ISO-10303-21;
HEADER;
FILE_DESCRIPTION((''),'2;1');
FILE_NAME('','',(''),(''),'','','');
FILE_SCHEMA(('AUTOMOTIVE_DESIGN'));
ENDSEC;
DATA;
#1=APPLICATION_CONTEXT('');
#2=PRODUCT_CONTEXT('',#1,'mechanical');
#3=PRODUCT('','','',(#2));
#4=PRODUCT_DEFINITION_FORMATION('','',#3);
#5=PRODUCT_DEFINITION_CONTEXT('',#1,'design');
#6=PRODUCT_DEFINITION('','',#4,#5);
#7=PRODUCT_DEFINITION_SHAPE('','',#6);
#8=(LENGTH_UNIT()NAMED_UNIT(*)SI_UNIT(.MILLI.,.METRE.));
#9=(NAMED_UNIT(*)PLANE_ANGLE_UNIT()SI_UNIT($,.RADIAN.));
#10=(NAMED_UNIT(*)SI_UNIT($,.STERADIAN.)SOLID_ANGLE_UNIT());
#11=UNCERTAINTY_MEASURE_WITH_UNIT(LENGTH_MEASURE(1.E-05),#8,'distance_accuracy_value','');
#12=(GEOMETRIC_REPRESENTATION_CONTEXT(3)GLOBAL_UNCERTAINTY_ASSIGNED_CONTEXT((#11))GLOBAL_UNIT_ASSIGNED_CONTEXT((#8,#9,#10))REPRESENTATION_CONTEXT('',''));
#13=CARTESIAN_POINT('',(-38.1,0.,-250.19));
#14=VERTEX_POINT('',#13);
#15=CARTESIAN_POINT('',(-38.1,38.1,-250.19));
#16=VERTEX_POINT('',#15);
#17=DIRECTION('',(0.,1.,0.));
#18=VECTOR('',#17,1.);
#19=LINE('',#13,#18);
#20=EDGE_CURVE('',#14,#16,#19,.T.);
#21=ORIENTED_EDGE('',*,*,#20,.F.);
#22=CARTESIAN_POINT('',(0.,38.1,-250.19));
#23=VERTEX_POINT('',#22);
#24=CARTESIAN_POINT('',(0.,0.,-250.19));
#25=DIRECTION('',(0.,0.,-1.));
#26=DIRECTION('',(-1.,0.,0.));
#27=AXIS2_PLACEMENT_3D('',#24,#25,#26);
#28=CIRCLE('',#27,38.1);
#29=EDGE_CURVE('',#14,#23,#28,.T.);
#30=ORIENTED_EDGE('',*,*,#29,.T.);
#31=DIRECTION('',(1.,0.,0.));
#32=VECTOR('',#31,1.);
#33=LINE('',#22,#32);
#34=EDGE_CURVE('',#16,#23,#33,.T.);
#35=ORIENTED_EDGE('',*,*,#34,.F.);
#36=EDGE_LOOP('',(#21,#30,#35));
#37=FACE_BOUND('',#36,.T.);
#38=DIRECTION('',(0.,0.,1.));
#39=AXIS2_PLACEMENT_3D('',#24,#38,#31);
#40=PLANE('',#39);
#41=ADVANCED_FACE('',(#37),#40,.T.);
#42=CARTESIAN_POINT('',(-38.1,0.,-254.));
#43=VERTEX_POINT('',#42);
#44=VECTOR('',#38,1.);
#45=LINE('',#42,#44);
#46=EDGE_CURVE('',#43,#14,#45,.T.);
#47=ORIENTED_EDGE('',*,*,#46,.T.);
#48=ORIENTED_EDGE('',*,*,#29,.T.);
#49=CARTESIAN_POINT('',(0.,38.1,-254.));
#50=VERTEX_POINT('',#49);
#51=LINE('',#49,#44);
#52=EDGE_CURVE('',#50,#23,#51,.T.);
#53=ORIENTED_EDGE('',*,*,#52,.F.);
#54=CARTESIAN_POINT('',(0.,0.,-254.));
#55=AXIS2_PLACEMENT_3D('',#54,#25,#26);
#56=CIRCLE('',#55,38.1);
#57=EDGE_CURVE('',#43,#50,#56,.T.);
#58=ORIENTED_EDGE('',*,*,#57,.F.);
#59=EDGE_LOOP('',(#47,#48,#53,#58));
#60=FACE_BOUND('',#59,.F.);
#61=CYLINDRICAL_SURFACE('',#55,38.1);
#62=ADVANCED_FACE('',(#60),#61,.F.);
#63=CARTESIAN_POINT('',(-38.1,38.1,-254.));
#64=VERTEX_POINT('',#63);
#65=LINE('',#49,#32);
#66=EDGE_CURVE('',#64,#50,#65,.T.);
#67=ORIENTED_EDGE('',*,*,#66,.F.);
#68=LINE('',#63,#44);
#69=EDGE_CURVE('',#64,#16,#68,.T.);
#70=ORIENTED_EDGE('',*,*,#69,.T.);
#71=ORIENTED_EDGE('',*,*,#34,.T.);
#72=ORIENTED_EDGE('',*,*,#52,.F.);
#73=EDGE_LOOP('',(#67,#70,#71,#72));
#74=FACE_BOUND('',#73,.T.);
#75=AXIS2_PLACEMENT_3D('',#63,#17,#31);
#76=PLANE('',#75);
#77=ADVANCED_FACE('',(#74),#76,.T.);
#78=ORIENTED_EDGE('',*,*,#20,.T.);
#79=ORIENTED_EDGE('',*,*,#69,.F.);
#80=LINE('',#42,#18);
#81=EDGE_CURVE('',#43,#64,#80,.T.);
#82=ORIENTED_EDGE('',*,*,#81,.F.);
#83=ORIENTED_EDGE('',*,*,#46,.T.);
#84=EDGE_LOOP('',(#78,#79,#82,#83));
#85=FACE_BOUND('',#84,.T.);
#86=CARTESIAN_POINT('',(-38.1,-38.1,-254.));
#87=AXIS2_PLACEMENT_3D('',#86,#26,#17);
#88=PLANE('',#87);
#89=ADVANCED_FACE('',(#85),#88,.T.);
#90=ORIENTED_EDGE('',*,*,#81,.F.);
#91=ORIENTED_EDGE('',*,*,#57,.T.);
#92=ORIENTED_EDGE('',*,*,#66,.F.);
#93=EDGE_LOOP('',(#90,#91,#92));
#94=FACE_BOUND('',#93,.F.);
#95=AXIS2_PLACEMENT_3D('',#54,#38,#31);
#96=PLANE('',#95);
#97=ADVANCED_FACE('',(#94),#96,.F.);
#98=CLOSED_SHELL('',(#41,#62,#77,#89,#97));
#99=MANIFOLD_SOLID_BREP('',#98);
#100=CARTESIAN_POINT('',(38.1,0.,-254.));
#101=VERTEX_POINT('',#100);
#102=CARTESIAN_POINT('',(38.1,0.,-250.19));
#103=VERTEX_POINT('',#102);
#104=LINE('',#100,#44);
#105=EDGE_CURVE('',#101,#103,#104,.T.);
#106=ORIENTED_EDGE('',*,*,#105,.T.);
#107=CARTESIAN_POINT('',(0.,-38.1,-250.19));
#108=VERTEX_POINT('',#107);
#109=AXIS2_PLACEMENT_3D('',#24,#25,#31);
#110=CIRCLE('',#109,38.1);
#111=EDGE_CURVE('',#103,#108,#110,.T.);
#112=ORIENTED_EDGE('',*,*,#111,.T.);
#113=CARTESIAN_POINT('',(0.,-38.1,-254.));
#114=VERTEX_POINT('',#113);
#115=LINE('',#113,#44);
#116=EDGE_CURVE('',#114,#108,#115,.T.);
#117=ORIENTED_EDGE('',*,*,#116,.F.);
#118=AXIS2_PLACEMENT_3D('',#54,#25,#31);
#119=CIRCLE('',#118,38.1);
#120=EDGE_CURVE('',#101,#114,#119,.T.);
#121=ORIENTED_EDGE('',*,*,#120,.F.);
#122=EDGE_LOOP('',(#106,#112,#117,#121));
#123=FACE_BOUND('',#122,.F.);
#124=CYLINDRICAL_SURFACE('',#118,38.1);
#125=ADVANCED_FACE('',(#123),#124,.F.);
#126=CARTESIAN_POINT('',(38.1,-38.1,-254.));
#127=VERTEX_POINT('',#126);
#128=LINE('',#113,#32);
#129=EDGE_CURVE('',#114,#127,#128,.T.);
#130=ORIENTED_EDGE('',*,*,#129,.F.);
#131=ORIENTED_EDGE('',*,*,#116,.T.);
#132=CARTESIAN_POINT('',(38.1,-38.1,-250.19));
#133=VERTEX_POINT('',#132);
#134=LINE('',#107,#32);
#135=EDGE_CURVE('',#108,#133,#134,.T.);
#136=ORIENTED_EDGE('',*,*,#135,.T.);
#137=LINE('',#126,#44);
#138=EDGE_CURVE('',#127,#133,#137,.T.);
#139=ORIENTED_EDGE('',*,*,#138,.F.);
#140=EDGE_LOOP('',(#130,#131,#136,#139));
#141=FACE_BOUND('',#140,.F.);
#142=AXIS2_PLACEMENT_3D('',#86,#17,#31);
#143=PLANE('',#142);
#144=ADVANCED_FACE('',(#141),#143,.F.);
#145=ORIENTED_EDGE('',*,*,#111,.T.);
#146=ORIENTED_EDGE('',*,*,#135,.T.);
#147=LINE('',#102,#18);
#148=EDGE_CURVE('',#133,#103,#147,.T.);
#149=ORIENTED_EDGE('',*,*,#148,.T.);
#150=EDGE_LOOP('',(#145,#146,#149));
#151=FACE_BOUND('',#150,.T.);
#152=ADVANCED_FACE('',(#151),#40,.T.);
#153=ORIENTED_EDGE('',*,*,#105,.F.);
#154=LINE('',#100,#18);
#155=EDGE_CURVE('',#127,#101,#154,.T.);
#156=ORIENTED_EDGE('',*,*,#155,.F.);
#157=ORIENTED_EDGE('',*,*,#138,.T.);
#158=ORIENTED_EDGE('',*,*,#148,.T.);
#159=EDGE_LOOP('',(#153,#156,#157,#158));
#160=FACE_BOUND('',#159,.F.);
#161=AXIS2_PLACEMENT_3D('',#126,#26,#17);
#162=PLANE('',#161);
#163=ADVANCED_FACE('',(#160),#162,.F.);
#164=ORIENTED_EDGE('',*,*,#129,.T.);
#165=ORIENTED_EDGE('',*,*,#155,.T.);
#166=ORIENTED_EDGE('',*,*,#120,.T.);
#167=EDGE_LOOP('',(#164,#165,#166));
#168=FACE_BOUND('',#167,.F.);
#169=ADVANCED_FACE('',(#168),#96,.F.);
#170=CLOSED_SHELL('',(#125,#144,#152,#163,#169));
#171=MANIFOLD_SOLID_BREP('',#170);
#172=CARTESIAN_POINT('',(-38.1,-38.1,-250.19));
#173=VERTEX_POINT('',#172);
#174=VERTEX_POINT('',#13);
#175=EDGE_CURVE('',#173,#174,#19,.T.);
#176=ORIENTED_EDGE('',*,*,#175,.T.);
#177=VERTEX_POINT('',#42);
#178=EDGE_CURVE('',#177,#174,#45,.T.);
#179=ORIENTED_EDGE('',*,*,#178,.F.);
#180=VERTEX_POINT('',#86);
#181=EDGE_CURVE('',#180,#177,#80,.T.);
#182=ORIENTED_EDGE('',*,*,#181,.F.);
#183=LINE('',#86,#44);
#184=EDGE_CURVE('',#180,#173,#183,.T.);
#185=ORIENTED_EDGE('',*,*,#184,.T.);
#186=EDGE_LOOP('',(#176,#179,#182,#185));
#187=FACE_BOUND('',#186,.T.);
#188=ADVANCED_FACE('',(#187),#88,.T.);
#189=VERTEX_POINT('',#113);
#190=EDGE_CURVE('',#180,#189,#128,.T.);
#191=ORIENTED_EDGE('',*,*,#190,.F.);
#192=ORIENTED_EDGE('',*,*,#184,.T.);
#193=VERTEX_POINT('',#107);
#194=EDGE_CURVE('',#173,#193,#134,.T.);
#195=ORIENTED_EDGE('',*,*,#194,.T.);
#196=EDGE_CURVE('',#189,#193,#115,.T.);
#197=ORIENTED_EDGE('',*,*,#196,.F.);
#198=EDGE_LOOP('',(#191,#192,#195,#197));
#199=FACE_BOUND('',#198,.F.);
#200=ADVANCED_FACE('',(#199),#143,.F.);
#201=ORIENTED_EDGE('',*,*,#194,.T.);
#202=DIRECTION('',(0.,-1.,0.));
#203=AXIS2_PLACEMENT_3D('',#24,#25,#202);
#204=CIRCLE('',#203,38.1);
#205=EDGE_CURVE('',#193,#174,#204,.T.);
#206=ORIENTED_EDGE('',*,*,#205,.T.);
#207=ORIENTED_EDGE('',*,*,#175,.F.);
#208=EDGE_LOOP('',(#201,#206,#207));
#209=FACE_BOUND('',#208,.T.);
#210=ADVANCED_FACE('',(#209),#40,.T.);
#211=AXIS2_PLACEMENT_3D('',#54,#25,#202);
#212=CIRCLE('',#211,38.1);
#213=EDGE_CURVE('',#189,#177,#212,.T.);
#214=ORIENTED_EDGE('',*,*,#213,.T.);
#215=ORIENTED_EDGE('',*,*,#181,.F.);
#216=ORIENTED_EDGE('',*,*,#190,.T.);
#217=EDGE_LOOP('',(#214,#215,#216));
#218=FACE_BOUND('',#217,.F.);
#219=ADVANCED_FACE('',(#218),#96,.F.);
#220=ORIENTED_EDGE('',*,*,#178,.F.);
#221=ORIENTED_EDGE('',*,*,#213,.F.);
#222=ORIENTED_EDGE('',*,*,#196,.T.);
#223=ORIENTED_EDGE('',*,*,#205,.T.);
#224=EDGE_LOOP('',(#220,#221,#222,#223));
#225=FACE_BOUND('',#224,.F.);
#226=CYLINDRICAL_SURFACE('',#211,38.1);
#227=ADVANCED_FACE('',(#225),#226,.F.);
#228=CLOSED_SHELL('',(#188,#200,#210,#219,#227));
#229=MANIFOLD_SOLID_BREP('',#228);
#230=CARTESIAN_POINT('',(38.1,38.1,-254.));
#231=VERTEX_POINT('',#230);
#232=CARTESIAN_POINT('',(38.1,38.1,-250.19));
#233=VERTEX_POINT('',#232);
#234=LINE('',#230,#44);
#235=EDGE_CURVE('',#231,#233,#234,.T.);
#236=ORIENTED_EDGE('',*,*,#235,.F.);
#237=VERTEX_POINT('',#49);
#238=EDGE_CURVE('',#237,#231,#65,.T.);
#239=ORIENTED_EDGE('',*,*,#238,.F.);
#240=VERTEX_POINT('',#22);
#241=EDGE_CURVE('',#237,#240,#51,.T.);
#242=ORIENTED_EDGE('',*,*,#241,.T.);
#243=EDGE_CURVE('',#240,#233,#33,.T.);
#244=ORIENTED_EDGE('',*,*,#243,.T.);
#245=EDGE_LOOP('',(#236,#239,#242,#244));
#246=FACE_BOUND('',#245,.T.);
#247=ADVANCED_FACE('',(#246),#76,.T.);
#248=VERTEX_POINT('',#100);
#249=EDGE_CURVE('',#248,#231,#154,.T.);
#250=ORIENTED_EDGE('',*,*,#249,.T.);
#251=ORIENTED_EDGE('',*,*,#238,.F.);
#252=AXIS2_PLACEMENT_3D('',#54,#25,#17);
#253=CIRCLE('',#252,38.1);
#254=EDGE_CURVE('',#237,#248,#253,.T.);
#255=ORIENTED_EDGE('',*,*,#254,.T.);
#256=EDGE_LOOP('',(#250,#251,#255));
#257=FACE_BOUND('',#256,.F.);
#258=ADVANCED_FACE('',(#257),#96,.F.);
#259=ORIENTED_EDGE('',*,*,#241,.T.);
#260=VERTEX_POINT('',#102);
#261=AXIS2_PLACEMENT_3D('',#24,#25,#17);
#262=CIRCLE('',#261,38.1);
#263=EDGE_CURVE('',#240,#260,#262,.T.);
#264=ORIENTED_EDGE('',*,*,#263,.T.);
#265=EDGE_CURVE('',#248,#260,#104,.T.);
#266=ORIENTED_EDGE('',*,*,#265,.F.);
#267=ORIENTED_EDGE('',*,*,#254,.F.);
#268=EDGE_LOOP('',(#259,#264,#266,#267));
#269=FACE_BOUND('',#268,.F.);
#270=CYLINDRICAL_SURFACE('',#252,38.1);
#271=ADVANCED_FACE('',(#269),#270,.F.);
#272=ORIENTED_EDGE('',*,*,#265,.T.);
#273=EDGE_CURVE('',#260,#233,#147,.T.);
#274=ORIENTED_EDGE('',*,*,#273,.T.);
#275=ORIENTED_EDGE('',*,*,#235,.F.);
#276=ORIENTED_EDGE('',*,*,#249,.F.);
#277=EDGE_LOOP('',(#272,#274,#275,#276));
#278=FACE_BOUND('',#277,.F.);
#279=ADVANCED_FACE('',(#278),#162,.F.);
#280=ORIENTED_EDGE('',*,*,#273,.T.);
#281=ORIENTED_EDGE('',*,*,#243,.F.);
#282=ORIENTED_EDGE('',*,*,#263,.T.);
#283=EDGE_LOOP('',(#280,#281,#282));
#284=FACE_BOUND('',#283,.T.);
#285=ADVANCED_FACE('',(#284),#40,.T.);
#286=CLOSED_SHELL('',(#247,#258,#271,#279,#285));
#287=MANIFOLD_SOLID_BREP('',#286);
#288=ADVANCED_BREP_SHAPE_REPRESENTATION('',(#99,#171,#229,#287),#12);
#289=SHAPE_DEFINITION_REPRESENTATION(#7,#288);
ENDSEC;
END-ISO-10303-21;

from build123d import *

# Parameters (mm, degrees)
F4_W     = 76.2
F4_H     = 76.2
F5_DEPTH = 3.81
F7_DEPTH = 101.346


# Not quite as in the source:
# - the program builds the solid bodies; features that only make, move or delete a surface that nothing else refers to are left out


with BuildPart() as f5:
    # F4 (on offset) → F5 (new body)
    with BuildSketch(Plane.XY.offset(-254)):
        Rectangle(F4_W, F4_H)
    extrude(amount=F5_DEPTH)

    # F6 (on face) → F7 (cut)
    with BuildSketch(Plane(origin=(0, 0, -254), x_dir=(1, 0, 0), z_dir=(0, 0, -1))):
        with BuildLine():
            ThreePointArc((0, -38.1), (26.9407683632, -26.9407683632), (38.1, 0))
            ThreePointArc((38.1, 0), (26.9407683632, 26.9407683632), (0, 38.1))
            ThreePointArc((0, 38.1), (-26.9407683632, 26.9407683632), (-38.1, 0))
            ThreePointArc((-38.1, 0), (-26.9407683632, -26.9407683632), (0, -38.1))
        make_face()
    extrude(amount=-F7_DEPTH, mode=Mode.SUBTRACT)


solid = f5.part
